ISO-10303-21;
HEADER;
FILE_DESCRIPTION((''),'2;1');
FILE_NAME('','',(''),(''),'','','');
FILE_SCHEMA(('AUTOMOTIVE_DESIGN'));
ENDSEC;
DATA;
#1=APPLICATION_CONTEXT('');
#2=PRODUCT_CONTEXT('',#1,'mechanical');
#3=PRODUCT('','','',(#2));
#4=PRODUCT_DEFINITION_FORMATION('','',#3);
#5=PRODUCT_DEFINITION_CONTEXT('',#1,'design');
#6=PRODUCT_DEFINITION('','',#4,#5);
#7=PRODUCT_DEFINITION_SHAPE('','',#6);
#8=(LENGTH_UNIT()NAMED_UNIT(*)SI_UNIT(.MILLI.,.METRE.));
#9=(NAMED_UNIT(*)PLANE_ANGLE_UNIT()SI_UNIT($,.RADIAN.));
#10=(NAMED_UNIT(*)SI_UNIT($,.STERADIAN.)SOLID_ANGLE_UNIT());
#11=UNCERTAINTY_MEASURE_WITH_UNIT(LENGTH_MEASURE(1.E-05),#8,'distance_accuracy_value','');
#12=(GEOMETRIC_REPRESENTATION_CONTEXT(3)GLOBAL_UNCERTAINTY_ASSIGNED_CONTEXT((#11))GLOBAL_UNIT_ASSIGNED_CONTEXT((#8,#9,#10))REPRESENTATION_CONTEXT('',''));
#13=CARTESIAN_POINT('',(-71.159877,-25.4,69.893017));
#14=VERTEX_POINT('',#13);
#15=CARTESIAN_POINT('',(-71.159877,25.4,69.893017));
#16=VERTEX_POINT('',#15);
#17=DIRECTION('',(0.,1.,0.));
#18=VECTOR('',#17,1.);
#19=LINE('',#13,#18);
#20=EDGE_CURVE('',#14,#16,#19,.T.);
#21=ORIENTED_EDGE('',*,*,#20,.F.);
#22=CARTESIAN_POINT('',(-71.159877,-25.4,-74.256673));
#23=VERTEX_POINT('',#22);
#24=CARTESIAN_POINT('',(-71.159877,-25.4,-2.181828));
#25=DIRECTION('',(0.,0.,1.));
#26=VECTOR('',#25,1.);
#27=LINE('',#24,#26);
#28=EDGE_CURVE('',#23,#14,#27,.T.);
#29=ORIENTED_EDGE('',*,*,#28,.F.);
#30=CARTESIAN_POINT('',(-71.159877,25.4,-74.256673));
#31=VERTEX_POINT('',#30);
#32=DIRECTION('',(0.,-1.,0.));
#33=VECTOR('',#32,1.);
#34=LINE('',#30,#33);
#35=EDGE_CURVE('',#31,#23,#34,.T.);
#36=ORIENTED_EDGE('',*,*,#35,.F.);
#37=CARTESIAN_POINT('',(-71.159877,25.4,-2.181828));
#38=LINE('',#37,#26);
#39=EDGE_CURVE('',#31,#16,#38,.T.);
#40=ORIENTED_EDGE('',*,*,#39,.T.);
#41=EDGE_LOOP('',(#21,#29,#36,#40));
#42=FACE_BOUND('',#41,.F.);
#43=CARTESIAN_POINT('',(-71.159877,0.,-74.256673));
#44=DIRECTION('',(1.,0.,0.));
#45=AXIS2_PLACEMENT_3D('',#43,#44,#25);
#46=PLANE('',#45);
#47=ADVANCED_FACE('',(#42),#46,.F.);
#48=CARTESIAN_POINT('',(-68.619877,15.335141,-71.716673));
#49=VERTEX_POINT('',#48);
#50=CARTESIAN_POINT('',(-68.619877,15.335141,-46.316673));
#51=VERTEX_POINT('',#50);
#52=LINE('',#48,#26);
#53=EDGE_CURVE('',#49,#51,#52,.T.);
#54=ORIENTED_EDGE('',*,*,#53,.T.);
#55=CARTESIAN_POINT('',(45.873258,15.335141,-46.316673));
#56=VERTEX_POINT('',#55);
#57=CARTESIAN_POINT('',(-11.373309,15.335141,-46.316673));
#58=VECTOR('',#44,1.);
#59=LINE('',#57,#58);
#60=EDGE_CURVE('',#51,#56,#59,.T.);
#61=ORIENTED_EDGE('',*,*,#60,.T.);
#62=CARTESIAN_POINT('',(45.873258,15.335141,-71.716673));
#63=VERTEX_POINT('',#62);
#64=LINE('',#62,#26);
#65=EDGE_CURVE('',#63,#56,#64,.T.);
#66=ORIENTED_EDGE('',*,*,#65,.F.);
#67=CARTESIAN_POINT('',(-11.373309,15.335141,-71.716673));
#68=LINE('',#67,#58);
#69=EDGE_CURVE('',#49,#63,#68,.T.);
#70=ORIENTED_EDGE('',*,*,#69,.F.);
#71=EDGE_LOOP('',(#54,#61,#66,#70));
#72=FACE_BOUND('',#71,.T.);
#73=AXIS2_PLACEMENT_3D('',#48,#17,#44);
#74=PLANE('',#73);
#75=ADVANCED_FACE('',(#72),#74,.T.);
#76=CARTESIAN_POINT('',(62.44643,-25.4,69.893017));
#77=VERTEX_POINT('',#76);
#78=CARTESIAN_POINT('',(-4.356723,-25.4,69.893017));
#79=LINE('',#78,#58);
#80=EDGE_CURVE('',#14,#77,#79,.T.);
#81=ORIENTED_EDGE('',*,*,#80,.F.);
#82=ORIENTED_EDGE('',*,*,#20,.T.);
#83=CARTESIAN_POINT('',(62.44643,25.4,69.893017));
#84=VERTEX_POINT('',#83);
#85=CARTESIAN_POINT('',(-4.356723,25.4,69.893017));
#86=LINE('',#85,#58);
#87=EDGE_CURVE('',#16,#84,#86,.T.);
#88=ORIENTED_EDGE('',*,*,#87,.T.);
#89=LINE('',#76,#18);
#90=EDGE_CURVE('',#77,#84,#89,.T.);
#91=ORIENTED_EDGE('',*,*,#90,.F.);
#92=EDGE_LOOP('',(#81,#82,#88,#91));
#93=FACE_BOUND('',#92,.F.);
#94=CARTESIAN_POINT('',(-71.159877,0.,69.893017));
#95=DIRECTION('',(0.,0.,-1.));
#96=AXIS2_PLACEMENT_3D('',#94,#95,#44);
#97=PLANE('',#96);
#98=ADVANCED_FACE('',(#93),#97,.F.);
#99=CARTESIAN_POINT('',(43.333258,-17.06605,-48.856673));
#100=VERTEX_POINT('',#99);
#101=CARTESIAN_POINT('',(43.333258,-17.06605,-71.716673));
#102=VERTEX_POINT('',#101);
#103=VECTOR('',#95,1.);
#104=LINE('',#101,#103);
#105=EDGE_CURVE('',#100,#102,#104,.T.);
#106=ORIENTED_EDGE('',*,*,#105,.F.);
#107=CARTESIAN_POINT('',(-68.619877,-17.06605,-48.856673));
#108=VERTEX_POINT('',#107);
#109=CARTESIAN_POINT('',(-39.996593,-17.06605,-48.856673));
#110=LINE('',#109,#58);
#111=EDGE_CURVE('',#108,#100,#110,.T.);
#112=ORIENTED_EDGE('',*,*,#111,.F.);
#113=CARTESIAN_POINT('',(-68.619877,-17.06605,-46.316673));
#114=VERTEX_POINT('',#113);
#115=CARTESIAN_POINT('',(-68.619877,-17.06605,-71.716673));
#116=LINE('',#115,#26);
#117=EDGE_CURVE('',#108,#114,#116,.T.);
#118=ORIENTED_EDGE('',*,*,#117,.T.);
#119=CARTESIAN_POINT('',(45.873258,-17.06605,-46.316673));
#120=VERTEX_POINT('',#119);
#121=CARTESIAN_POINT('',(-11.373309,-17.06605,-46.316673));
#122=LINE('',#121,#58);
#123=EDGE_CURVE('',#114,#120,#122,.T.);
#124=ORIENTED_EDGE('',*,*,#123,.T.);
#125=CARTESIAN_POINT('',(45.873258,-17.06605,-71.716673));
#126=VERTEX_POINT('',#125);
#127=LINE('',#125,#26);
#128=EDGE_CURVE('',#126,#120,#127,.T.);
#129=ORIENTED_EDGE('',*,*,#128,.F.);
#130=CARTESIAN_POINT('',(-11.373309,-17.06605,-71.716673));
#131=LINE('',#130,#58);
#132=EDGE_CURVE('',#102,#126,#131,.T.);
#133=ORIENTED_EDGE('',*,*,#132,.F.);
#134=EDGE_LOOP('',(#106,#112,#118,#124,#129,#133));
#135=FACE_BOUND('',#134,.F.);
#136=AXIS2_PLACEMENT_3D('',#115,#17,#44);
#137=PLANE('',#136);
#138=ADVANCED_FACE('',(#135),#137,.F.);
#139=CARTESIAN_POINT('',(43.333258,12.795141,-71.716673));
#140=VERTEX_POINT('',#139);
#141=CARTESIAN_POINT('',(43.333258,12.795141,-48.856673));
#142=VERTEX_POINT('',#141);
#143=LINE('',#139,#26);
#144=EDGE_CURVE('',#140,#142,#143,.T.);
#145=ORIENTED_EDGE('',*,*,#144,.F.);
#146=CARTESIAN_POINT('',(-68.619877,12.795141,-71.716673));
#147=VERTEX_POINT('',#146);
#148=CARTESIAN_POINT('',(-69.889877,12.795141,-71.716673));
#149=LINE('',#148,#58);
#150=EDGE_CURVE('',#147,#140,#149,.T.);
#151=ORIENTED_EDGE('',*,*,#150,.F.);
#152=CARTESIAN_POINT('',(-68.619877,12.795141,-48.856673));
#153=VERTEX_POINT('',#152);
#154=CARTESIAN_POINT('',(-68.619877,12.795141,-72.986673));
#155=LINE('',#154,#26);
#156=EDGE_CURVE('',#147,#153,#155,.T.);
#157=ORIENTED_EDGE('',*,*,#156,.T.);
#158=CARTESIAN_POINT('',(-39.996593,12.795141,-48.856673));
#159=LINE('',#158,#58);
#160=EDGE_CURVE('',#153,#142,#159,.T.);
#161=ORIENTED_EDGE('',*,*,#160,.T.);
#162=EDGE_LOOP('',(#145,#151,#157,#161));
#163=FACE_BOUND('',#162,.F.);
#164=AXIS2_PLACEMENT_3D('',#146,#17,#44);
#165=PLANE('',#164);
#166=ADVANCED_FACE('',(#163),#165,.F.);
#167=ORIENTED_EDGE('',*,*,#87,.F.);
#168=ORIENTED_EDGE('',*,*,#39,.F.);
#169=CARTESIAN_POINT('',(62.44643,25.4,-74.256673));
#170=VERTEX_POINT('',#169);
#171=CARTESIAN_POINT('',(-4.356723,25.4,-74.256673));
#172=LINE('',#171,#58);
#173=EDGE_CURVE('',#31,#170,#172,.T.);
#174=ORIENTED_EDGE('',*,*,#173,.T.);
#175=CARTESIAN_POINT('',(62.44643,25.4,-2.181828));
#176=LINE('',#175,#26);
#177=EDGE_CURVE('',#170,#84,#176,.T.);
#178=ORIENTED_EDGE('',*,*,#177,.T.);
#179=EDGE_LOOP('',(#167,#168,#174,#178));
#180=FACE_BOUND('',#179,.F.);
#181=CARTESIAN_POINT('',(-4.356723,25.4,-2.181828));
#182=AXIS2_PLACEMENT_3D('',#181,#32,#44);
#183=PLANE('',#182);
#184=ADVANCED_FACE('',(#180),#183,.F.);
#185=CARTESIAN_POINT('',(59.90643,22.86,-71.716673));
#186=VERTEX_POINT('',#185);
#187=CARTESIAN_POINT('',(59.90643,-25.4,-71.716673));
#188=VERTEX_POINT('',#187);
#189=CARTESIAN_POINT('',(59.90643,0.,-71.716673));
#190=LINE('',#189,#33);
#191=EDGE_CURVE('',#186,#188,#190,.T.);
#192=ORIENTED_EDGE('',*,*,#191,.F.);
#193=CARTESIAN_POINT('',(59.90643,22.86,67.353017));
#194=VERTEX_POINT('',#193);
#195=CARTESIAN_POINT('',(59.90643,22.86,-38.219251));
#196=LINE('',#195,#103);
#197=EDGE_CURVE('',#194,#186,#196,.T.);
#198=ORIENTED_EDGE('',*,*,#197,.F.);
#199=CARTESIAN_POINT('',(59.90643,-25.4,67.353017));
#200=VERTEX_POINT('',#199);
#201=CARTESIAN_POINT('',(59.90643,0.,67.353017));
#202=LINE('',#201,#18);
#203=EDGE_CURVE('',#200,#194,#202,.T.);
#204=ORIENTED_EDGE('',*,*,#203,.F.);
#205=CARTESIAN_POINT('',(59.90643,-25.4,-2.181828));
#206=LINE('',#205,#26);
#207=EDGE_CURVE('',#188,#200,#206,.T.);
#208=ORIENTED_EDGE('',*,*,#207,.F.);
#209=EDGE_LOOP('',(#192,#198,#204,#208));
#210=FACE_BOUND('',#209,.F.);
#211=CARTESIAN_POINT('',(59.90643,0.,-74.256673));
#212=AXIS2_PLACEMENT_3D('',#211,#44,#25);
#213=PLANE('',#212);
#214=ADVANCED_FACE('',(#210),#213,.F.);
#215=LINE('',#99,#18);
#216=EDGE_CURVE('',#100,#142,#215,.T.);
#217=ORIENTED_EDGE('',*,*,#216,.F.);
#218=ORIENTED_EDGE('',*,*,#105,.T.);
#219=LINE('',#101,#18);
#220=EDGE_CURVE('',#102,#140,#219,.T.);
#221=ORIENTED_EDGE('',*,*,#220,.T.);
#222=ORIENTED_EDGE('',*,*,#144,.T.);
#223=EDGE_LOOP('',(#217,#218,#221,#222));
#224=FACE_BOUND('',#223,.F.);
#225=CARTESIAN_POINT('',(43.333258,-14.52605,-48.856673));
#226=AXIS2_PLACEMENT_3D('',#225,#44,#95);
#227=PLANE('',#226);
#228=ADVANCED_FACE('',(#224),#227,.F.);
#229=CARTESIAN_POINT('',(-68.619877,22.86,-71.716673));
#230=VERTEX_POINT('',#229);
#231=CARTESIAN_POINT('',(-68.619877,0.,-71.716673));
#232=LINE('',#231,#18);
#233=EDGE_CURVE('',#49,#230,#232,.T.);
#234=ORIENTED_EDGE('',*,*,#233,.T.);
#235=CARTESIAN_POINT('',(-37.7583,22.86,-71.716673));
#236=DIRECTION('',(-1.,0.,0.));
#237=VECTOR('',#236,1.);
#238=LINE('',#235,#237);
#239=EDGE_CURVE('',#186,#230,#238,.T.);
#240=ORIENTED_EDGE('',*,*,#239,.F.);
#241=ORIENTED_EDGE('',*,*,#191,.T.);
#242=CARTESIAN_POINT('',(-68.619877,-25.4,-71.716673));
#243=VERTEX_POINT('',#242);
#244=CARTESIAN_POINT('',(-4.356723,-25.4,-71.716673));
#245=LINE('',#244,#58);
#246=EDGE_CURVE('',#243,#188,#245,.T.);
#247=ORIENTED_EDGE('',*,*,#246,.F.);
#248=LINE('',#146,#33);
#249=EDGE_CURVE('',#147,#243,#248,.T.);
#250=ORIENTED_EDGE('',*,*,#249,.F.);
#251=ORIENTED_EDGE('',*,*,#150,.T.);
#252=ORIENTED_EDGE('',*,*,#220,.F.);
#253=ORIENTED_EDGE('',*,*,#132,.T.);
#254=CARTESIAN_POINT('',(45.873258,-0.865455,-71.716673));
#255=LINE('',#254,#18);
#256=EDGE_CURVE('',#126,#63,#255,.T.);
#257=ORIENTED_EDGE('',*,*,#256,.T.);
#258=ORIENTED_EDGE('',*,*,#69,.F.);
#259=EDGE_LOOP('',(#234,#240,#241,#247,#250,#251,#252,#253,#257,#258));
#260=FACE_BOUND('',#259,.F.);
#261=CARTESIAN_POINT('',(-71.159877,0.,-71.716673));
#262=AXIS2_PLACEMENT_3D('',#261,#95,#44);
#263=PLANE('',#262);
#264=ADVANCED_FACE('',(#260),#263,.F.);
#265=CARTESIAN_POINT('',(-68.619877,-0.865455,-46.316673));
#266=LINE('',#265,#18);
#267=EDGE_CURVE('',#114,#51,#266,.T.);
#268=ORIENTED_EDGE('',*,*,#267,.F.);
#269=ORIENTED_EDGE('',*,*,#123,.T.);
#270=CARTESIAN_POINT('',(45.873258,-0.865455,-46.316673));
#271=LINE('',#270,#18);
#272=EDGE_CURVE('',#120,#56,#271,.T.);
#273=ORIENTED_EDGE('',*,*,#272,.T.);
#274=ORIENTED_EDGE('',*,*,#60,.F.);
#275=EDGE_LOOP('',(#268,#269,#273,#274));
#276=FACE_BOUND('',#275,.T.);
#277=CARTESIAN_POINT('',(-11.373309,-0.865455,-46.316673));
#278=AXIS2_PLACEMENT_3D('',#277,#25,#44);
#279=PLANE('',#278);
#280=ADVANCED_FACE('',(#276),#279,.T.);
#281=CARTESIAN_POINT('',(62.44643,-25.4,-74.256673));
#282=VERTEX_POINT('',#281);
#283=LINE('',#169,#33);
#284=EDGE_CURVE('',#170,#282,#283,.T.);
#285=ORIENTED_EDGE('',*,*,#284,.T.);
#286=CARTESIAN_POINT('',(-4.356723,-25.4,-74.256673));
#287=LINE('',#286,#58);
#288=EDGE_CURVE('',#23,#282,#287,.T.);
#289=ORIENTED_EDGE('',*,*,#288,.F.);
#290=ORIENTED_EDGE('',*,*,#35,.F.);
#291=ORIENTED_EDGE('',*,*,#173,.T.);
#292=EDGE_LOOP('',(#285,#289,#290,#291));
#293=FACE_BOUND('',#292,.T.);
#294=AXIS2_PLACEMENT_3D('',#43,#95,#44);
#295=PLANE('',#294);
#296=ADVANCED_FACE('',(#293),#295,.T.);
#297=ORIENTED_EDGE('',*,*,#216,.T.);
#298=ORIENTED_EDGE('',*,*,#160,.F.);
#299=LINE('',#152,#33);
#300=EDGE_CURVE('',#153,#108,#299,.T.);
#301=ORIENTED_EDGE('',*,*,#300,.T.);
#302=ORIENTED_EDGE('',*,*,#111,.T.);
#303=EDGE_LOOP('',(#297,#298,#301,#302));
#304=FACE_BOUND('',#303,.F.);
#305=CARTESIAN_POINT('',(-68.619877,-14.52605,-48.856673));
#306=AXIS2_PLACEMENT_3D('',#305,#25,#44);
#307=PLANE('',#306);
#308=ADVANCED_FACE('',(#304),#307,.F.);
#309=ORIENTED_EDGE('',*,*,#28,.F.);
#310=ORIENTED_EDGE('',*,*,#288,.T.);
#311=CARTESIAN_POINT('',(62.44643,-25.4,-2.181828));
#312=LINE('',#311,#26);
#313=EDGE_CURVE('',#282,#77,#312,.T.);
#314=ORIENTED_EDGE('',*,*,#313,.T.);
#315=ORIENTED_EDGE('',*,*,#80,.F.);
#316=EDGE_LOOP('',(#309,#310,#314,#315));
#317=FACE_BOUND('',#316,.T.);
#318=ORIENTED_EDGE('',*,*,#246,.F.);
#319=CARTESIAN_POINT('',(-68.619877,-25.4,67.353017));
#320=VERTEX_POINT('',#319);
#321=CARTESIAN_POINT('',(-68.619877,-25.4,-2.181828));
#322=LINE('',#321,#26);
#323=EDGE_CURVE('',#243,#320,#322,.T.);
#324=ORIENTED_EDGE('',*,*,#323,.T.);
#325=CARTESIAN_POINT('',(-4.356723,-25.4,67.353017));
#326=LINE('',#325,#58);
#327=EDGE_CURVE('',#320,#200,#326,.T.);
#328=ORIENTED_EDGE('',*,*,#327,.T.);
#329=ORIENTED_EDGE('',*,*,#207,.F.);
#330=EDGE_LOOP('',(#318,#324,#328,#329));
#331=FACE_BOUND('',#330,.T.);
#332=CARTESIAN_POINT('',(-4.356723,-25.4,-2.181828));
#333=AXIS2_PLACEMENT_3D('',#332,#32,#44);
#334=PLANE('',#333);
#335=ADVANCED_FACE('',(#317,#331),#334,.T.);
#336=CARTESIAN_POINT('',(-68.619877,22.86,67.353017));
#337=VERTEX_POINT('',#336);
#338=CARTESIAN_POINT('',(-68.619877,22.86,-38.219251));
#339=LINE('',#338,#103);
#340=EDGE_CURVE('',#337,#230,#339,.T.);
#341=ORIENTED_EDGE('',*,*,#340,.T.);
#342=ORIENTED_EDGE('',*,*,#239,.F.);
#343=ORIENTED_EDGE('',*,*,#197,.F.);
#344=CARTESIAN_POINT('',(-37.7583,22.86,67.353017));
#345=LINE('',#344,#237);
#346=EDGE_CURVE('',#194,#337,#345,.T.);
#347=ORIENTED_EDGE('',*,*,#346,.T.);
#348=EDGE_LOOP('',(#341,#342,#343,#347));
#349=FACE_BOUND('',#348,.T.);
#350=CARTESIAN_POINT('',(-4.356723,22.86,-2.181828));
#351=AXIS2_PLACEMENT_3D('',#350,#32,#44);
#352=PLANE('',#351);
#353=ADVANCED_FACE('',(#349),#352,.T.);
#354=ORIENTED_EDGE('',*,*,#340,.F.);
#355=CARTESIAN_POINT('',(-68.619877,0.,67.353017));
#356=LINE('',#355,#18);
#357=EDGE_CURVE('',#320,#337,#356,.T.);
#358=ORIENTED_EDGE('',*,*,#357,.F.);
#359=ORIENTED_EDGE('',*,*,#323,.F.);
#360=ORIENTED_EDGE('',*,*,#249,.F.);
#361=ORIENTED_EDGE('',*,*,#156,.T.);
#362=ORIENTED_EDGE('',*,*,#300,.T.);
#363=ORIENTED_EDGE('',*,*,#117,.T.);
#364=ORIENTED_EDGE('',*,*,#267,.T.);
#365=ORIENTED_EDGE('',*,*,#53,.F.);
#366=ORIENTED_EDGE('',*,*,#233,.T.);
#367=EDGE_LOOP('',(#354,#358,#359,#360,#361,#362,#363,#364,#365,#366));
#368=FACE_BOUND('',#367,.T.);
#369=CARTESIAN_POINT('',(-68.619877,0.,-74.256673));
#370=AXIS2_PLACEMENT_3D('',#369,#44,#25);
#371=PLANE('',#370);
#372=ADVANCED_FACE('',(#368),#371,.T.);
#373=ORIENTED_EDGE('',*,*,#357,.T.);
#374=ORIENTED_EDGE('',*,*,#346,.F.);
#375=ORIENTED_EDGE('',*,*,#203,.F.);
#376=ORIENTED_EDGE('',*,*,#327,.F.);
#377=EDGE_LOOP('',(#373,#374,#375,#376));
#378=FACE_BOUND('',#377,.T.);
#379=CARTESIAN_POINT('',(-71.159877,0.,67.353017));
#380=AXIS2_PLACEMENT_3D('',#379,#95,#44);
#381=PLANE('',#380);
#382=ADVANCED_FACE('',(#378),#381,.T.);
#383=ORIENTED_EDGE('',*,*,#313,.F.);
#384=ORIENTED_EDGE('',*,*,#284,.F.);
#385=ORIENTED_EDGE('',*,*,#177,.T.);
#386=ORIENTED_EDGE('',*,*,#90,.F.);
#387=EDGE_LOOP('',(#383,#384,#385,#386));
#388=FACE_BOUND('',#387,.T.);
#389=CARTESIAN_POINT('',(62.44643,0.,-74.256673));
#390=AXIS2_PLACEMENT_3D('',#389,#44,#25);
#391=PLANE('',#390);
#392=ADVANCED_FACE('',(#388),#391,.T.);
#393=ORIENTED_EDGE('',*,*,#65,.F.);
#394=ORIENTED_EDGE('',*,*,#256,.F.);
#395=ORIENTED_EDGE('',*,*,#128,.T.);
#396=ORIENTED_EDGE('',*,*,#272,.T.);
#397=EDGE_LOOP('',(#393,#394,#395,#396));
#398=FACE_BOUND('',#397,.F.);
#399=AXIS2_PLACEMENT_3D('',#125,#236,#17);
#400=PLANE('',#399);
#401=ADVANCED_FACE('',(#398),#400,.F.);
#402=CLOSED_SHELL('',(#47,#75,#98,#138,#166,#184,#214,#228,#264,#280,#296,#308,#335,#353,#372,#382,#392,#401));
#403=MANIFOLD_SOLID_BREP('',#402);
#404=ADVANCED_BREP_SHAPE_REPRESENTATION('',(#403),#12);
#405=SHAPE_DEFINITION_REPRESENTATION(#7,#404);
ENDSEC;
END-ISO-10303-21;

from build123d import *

# Parameters (mm, degrees)
F0_W          = 133.6063072085
F0_H          = 144.1496908665
F1_DEPTH      = 25.4
F1_DEPTH_BACK = 25.4
F2_T          = -2.54
F3_W          = 114.4931351459
F3_H          = 32.4011910707
F4_DEPTH      = 25.4
F5_T          = -2.54


# Not quite as in the source:
# - a shell that OpenCascade refuses in one call is made with other operations: the cavity is built on its own and cut out


with BuildPart() as f1:
    # F0 (on Front) → F1 (new body, two sides)
    with BuildSketch(Plane.XZ) as f1_sk:
        with Locations((-4.3567232788, -2.181828022)):
            Rectangle(F0_W, F0_H)
    extrude(amount=F1_DEPTH)
    extrude(f1_sk.sketch, amount=-F1_DEPTH_BACK)

    # F2
    f2_openings = [f1.faces().sort_by_distance(p)[0] for p in [
        (-4.356723, -25.4, -2.181828),
    ]]
    offset(amount=F2_T, openings=f2_openings)

    # F3 (on face) → F4 (join)
    with BuildSketch(Plane.XY.offset(-71.7166734552)):
        with Locations((-11.3733093101, -0.8654547855)):
            Rectangle(F3_W, F3_H)
    extrude(amount=F4_DEPTH)

    # F5: a shell. OpenCascade refuses it in one call, so the cavity is built on its own and cut out:
    # the body offset inwards by the wall thickness, plus a prism from it out through each open face.
    f5_core = offset(f1.part, amount=F5_T, kind=Kind.INTERSECTION, mode=Mode.PRIVATE)
    f5_exits = [f5_core.faces().sort_by_distance(p)[0] for p in [
        (-12.643309, -14.52605, -60.286673),
    ]]
    add(f5_core, mode=Mode.SUBTRACT)
    extrude(f5_exits, amount=-F5_T, mode=Mode.SUBTRACT)


solid = f1.part
